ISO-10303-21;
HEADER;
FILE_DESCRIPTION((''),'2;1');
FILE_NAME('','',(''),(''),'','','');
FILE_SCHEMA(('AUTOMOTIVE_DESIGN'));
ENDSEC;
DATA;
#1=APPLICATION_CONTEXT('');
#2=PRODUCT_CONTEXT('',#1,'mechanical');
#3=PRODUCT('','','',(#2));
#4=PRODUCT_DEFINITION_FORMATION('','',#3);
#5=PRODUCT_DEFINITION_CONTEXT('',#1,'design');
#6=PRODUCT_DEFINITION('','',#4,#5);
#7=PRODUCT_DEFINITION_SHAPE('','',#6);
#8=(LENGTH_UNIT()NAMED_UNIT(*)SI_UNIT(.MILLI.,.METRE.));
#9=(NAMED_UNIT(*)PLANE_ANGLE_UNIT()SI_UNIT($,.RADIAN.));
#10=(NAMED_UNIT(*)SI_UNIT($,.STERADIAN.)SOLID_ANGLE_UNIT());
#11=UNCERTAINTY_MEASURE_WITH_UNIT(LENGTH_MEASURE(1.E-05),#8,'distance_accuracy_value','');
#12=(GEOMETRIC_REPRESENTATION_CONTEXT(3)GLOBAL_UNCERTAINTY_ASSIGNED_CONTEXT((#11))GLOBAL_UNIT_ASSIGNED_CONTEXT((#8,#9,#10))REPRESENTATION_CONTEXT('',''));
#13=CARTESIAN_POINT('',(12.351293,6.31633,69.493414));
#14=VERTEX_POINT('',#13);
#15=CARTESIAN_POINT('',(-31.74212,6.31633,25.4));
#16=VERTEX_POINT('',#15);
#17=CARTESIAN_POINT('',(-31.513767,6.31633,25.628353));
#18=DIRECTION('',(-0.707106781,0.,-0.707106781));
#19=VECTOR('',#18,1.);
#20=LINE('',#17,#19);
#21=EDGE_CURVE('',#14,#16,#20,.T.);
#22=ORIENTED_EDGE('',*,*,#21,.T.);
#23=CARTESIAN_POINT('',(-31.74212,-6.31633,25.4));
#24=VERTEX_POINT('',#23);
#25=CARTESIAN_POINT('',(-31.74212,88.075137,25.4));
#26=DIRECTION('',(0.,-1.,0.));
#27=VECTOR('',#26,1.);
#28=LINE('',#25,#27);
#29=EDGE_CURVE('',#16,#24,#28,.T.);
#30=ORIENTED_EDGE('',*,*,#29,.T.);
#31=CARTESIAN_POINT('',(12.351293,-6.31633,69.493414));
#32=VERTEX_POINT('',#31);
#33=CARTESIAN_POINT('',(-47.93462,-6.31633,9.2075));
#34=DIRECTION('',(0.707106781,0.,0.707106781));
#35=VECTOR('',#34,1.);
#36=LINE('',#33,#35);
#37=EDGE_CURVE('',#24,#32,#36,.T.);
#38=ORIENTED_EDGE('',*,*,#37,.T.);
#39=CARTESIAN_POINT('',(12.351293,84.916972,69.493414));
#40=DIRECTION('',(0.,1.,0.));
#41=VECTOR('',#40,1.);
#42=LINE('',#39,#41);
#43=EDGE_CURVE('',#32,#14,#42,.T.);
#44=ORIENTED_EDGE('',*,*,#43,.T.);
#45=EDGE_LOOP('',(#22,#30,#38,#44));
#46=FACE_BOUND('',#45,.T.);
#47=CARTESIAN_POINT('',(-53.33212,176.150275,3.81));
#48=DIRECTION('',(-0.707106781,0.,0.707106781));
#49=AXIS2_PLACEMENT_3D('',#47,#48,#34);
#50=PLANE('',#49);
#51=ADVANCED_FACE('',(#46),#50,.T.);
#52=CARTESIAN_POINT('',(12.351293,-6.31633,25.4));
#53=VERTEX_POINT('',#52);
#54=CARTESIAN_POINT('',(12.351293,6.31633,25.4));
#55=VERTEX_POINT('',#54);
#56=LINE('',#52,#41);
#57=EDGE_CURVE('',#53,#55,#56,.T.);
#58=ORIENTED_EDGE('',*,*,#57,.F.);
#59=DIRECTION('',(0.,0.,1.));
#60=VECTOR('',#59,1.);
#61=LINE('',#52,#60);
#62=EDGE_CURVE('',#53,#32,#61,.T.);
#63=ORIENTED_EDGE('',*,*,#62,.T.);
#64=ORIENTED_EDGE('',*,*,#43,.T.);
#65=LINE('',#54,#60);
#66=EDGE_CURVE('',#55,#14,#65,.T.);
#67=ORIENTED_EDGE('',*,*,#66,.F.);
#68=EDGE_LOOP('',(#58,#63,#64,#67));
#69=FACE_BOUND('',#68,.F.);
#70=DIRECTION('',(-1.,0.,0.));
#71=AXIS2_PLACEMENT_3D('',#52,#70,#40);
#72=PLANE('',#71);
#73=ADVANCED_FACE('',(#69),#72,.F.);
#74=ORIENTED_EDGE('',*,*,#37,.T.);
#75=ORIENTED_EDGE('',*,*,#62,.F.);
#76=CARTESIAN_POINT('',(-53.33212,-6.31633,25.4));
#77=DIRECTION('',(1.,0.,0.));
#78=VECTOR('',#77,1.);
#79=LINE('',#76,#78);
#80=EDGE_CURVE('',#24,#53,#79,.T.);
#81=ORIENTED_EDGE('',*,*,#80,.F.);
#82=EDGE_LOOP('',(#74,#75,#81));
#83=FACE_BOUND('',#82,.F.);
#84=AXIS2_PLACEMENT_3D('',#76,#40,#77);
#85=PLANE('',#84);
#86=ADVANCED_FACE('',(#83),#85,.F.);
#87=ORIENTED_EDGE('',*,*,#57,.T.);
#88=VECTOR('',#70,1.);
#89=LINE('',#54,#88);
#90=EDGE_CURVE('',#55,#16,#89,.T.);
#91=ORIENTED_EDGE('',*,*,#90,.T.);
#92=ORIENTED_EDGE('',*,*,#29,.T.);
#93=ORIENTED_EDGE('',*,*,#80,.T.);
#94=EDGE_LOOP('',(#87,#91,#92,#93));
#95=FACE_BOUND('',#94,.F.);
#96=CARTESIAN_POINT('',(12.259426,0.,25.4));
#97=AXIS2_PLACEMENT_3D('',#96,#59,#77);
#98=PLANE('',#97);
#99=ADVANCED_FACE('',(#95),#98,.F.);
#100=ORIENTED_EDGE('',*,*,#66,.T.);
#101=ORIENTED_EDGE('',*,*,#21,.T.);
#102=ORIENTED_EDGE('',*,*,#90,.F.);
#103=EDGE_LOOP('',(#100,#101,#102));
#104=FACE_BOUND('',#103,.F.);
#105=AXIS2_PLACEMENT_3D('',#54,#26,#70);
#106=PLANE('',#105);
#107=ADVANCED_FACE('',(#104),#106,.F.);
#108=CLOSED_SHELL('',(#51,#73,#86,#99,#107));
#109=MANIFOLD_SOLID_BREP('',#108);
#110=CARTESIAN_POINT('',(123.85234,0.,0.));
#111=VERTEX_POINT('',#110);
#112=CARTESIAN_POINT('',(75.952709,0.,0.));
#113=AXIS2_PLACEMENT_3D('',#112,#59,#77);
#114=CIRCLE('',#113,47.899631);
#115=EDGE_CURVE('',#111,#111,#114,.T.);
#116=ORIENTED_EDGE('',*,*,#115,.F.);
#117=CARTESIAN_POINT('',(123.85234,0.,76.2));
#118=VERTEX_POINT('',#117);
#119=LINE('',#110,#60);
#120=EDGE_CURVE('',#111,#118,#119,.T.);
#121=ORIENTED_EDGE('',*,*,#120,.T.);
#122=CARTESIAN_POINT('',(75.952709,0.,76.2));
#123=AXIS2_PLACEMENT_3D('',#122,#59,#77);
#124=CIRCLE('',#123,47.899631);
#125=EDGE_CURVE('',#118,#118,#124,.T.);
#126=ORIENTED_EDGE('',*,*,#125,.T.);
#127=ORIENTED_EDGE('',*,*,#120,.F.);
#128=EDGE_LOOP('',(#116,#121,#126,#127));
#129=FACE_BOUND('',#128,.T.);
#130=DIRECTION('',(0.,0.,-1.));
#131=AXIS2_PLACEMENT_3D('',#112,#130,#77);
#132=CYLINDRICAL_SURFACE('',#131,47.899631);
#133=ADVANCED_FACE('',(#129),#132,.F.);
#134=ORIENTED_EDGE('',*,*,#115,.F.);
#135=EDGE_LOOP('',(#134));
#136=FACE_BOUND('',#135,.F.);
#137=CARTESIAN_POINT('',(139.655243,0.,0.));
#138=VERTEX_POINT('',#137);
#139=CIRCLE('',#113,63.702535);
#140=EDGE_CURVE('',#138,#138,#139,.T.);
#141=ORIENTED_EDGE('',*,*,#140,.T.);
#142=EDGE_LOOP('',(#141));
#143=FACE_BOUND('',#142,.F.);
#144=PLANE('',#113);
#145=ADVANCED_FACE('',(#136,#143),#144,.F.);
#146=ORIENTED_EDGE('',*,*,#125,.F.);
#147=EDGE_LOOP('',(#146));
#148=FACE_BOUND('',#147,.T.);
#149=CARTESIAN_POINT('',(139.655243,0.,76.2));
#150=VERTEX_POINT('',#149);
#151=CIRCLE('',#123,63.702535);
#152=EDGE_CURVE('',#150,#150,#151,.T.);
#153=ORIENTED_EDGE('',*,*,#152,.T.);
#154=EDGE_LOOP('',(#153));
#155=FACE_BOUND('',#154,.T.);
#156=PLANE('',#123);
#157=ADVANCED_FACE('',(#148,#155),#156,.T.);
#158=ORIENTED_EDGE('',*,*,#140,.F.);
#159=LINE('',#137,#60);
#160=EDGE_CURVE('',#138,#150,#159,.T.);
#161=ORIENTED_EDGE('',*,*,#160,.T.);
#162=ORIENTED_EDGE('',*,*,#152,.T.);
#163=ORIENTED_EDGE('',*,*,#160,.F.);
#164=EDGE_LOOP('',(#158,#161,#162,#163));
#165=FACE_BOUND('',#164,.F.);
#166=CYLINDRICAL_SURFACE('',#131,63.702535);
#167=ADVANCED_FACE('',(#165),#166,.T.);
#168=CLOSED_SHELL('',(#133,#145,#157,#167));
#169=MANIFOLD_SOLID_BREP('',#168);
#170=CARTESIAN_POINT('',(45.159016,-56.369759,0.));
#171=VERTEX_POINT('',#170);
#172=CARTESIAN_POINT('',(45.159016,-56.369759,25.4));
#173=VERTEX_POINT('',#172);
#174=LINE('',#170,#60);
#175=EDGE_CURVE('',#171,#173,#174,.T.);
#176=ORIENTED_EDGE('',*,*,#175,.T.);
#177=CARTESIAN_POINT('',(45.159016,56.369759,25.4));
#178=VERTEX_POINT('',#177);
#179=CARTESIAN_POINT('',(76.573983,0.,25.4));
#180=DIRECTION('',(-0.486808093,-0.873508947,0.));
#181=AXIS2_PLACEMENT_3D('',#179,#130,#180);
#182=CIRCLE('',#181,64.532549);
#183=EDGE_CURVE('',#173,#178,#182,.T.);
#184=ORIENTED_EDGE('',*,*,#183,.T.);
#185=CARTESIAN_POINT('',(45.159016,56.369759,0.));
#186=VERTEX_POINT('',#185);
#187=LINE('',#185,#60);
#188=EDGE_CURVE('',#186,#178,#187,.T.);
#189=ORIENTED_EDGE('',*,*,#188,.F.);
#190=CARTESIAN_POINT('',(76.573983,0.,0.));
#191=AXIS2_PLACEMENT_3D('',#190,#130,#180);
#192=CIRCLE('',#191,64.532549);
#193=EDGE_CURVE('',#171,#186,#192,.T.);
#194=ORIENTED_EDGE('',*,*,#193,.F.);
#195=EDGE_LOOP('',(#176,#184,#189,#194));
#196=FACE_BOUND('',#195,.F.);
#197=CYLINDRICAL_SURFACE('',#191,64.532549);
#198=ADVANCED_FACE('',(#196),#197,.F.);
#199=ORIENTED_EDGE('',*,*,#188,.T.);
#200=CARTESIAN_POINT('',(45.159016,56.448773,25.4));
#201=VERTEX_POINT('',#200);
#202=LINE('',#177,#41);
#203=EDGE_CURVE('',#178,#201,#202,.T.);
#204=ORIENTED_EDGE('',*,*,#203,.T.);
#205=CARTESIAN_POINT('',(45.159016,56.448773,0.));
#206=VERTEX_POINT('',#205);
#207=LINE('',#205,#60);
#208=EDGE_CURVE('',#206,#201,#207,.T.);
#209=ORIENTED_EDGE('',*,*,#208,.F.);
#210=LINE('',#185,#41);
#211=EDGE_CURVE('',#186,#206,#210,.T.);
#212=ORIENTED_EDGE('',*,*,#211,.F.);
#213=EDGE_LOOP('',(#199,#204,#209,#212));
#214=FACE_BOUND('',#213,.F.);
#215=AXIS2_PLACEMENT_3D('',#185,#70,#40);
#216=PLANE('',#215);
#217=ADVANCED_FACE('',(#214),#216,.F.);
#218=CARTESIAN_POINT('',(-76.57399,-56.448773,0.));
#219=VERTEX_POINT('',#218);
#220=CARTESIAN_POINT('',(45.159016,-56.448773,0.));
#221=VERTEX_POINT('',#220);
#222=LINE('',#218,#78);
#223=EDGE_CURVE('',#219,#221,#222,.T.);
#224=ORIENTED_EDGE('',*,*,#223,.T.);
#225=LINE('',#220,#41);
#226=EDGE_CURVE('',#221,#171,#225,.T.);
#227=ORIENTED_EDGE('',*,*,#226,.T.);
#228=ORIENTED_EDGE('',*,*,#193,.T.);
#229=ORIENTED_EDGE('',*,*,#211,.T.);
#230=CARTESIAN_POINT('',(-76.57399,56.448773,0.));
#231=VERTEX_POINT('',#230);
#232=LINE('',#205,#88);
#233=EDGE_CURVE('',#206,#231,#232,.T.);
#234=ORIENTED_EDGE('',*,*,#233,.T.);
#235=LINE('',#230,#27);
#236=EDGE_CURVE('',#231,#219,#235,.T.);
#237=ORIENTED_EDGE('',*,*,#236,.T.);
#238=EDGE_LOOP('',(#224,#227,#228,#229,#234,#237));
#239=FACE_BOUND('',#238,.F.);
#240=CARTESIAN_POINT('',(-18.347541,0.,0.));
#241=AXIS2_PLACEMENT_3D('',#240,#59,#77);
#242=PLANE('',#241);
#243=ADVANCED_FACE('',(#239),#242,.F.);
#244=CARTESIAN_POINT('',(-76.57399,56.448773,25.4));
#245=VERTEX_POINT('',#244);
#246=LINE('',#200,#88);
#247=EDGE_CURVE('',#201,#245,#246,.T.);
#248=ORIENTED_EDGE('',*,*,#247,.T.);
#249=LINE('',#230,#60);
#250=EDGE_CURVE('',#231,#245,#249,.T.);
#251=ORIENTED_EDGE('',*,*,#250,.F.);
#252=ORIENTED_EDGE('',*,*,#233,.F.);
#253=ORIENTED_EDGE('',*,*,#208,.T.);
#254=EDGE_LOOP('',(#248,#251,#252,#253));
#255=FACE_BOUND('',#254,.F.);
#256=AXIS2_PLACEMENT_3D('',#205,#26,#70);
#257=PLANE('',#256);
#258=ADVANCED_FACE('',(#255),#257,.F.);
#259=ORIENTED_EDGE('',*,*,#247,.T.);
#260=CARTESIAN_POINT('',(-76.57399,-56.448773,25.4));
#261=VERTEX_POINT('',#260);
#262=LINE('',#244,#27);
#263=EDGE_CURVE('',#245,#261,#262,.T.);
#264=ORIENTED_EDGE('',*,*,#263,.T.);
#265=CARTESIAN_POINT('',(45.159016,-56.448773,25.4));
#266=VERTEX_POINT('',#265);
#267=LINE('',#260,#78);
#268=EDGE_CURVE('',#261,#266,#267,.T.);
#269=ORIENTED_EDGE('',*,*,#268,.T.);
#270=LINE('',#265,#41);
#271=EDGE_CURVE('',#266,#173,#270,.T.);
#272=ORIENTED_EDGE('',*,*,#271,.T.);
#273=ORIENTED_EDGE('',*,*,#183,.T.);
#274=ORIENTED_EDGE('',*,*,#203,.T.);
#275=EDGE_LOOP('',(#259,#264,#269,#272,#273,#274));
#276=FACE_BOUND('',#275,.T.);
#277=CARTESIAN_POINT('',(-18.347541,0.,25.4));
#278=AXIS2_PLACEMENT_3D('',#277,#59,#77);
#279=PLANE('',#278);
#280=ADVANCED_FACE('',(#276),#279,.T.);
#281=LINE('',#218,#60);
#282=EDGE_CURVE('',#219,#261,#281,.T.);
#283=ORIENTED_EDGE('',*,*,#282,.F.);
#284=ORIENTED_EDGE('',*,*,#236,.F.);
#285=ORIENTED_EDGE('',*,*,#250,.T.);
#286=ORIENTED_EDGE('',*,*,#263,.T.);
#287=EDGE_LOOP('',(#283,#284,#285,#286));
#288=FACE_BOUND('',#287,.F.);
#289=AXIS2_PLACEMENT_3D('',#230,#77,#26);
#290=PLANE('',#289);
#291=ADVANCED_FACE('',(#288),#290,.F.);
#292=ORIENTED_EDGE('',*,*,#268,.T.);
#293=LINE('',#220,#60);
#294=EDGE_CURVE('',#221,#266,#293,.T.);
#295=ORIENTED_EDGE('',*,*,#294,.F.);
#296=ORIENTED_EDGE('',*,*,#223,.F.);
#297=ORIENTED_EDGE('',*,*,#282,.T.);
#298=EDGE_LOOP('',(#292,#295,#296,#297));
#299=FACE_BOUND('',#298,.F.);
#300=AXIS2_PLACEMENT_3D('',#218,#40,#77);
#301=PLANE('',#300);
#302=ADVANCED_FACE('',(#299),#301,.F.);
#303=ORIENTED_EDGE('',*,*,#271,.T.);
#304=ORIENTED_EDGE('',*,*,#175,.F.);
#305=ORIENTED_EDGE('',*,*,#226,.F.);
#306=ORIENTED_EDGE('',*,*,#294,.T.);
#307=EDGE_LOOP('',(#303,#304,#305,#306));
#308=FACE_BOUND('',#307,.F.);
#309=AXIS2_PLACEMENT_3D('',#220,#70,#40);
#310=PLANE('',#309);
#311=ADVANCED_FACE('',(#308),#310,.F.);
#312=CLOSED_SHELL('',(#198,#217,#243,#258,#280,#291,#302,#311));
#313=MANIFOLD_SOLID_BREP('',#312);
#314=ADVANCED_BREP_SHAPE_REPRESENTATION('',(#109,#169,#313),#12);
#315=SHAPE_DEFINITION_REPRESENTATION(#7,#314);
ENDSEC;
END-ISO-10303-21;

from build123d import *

# Parameters (mm, degrees)
F1_DEPTH    = 25.4
F2_R        = 63.7025346574
F2_R_2      = 47.8996309488
F3_DEPTH    = 76.2
F5_DEPTH    = 44.45
F6_T1_DEPTH = 352.3005494338


# Not quite as in the source:
# - a fillet or chamfer that OpenCascade refuses, or shapes differently, is made with other operations: its cross-section is extruded or revolved along the edge and cut away or added


with BuildPart() as f1:
    # F0 (on Top) → F1 (new body)
    with BuildSketch(Plane.XY):
        with BuildLine():
            Line((45.1590158045, 56.4487725496), (-76.5739902854, 56.4487725496))
            Line((-76.5739902854, 56.4487725496), (-76.5739902854, -56.4487725496))
            Line((-76.5739902854, -56.4487725496), (45.1590158045, -56.4487725496))
            Line((45.1590158045, -56.4487725496), (45.1590158045, -56.369758806))
            ThreePointArc((45.1590158045, -56.369758806), (12.0414339826, 0), (45.1590158045, 56.369758806))
            Line((45.1590158045, 56.369758806), (45.1590158045, 56.4487725496))
        make_face()
    extrude(amount=F1_DEPTH)


with BuildPart() as f3:
    # F2 (on Top) → F3 (new body)
    with BuildSketch(Plane.XY):
        with Locations((75.9527087212, 0)):
            Circle(F2_R)
        with Locations((75.9527087212, 0)):
            Circle(F2_R_2, mode=Mode.SUBTRACT)
    extrude(amount=F3_DEPTH)


with BuildPart() as f5:
    # F4 (on face) → F5 (new body)
    with BuildSketch(Plane.XY.offset(25.4)):
        with BuildLine():
            ThreePointArc((12.3512934309, 6.3163301916), (12.0414339826, 0), (12.3512934309, -6.3163301916))
            Line((12.3512934309, -6.3163301916), (12.3512934309, 6.3163301916))
        make_face()
        with BuildLine():
            Line((-53.3321204942, -6.3163301916), (12.3512934309, -6.3163301916))
            ThreePointArc((12.3512934309, -6.3163301916), (12.0414339826, 0), (12.3512934309, 6.3163301916))
            Line((12.3512934309, 6.3163301916), (-53.3321204942, 6.3163301916))
            Line((-53.3321204942, 6.3163301916), (-53.3321204942, -6.3163301916))
        make_face()
    extrude(amount=F5_DEPTH)

    # F6: chamfer of 66.04 on 1 edges, made by hand

    # F6_s2 → F6_t1 (cut)
    with BuildSketch(Plane.XZ.offset(-176.1502747169)):
        Polygon((-53.3321204942, 3.81), (12.7078795058, 69.85), (-53.3321204942, 69.85), align=None)
    extrude(amount=F6_T1_DEPTH, mode=Mode.SUBTRACT)


solid = Compound([f1.part, f3.part, f5.part])
